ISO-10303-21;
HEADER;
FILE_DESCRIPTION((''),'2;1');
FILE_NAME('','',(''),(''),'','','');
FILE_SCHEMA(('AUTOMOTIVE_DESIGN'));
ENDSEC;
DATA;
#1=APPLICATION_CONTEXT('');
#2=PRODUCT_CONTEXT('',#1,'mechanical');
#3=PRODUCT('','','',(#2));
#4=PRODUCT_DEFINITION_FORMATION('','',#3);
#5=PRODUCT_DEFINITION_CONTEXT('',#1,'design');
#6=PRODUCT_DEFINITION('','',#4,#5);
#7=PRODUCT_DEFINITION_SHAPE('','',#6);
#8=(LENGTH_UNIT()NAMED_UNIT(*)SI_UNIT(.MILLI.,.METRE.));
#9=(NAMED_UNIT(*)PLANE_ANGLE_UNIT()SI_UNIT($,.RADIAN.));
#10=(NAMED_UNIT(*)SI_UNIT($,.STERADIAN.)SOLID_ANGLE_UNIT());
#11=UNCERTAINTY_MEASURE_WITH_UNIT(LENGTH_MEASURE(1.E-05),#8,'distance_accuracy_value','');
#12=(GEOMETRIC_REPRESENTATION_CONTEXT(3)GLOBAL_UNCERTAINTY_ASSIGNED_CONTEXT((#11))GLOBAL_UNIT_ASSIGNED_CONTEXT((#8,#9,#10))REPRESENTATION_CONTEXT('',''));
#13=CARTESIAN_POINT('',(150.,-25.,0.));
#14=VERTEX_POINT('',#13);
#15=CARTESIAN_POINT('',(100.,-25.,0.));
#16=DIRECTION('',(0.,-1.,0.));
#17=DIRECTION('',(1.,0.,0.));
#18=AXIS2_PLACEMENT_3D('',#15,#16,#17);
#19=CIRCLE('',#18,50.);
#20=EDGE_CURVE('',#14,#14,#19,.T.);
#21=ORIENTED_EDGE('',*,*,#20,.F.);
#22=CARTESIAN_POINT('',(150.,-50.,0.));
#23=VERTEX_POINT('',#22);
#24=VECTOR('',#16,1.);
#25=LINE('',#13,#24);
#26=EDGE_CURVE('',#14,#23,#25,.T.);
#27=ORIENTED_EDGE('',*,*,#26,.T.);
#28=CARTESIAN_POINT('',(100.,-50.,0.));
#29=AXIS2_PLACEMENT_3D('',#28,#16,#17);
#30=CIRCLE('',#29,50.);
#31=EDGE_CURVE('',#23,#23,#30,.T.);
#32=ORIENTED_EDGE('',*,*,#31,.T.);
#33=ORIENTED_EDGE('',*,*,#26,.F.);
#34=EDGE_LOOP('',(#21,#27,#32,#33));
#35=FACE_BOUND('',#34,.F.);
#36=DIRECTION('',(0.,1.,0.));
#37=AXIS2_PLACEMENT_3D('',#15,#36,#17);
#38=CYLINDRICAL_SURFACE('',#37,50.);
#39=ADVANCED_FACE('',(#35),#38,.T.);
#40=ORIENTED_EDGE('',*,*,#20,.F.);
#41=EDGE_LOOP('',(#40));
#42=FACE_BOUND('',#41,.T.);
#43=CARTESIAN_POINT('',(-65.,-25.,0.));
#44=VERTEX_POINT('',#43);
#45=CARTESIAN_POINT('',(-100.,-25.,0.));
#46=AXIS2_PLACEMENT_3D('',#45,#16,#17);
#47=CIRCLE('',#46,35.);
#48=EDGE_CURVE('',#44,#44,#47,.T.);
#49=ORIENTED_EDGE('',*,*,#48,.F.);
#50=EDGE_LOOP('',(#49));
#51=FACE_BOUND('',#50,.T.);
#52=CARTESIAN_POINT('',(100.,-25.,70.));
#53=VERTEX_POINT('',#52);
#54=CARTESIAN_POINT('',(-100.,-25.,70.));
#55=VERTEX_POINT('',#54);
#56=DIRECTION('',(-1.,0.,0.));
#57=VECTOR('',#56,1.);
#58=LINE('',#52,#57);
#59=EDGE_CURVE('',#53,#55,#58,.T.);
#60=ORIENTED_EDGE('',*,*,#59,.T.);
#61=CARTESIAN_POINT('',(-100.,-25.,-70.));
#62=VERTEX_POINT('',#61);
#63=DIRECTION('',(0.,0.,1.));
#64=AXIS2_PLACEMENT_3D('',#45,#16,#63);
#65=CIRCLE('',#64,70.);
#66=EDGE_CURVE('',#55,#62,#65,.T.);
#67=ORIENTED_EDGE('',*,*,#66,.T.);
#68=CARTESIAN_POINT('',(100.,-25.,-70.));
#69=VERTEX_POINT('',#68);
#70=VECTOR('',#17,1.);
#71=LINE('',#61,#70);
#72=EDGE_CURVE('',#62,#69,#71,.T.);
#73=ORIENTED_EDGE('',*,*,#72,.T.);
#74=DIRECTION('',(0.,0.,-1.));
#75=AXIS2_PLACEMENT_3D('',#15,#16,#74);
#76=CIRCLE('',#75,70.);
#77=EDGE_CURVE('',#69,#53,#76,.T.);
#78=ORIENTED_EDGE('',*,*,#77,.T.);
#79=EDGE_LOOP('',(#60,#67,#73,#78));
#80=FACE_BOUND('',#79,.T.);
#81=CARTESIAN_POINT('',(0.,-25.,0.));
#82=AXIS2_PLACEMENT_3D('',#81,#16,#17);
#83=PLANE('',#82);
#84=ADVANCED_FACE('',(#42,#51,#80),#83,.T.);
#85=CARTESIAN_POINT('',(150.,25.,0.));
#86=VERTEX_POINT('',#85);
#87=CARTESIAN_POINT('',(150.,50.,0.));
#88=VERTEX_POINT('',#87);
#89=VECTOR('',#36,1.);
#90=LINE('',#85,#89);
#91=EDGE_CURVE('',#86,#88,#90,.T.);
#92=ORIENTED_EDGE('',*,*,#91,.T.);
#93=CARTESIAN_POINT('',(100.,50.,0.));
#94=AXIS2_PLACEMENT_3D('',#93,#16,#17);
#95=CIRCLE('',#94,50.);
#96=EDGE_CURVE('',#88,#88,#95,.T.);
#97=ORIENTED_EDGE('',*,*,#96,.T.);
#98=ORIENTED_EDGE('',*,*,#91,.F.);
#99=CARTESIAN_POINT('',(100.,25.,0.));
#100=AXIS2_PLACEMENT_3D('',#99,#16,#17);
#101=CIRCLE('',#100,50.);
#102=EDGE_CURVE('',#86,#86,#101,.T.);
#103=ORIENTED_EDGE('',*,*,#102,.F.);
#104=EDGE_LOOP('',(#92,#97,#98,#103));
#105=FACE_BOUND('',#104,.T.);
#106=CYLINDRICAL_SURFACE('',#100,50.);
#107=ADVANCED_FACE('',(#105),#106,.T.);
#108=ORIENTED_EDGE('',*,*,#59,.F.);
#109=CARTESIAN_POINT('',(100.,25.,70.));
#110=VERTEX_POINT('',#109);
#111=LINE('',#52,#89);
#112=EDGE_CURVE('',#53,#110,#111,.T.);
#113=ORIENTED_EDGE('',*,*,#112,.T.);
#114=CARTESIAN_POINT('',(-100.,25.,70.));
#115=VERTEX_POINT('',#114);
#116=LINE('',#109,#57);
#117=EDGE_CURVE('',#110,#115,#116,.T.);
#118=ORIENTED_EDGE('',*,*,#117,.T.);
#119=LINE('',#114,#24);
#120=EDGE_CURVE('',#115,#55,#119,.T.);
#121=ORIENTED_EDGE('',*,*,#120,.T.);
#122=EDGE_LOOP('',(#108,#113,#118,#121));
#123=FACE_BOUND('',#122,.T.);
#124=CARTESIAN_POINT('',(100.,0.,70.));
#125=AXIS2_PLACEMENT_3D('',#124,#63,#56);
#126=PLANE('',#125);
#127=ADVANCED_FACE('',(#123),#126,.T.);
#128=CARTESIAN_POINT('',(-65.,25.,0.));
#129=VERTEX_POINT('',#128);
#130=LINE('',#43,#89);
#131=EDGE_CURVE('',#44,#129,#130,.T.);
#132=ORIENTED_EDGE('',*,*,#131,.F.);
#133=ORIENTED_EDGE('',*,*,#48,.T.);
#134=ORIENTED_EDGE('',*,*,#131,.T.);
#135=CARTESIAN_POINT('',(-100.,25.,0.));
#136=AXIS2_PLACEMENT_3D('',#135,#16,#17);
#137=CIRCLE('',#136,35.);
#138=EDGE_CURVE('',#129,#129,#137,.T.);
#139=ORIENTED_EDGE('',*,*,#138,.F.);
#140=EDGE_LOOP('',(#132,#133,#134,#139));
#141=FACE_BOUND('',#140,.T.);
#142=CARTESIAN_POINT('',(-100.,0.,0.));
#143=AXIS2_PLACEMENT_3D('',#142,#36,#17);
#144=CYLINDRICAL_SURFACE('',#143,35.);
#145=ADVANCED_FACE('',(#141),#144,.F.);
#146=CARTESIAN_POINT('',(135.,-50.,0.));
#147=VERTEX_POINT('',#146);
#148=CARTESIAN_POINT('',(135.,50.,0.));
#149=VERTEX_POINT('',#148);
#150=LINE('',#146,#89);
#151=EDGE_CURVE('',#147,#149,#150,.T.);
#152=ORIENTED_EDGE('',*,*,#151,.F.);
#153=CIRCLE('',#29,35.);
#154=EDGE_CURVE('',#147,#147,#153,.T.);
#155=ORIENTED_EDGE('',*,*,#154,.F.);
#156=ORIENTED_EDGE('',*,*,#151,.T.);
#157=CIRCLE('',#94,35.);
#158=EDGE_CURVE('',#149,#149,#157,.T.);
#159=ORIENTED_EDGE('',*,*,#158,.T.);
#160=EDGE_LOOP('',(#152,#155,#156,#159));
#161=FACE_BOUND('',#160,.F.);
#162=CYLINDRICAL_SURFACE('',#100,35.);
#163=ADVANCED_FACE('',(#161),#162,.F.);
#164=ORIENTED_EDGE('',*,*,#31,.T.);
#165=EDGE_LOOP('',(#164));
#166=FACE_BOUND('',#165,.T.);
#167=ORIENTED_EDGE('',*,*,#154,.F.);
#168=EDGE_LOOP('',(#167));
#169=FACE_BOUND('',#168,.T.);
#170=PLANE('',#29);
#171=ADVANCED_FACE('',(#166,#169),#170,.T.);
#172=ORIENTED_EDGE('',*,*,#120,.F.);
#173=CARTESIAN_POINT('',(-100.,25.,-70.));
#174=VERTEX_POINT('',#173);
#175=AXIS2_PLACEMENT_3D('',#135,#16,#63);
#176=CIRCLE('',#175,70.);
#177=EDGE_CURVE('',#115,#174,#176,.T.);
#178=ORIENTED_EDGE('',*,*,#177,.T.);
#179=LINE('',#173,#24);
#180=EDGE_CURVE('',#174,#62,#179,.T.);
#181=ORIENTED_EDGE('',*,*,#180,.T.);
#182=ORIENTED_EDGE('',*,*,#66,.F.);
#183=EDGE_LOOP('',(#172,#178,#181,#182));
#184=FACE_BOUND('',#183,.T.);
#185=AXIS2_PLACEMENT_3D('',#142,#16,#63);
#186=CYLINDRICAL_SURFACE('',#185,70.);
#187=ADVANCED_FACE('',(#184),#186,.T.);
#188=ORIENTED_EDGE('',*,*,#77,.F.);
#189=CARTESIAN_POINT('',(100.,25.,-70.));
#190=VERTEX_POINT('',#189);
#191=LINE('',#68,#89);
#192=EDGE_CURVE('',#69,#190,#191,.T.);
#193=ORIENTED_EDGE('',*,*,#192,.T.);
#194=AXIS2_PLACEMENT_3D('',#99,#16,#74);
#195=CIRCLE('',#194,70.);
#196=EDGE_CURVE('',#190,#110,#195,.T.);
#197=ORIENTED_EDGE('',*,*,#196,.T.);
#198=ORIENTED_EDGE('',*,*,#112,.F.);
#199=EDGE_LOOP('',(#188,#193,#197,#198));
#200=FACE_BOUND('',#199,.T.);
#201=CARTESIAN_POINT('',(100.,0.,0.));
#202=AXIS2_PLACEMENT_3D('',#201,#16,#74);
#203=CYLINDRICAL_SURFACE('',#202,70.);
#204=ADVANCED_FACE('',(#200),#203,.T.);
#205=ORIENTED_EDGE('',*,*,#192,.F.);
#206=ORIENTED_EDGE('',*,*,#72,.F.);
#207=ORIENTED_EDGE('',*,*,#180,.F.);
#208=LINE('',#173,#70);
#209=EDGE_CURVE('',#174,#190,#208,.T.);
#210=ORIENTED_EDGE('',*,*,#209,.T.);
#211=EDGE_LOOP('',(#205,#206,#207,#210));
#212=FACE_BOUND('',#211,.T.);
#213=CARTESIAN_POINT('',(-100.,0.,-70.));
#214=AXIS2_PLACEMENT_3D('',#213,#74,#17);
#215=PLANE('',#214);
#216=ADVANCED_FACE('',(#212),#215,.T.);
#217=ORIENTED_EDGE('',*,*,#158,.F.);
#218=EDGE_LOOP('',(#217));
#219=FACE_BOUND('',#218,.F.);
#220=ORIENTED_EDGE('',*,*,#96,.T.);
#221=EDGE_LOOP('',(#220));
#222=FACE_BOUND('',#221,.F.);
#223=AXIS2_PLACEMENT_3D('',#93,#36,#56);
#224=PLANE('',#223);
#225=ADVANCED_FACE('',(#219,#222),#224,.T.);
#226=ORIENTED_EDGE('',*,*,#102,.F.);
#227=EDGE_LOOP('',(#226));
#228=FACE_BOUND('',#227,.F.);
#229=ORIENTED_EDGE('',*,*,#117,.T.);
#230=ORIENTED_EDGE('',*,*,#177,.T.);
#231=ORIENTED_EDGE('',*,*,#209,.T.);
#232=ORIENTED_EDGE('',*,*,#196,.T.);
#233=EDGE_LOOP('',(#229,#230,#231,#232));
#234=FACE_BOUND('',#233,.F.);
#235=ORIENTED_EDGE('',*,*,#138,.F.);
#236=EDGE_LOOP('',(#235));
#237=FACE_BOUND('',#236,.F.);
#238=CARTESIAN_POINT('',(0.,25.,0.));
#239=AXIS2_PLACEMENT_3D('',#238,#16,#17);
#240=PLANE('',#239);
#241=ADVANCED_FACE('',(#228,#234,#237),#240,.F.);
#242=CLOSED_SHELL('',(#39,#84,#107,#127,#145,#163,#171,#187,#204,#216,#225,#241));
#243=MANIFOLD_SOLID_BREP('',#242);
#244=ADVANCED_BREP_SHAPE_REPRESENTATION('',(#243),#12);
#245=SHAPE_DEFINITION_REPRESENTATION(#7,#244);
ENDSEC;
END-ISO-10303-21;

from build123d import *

# Parameters (mm, degrees)
F0_R     = 35
F1_DEPTH = 25
F2_R     = 50
F2_R_2   = 35
F3_DEPTH = 25


# Not quite as in the source:
# - a pattern or mirror of a feature is missing from the dataset's text; its kind, count and spacing are read off the source's solid


with BuildPart() as f1:
    # F0 (on Front) → F1 (new body, symmetric)
    with BuildSketch(Plane.XZ):
        with BuildLine():
            Line((100, 70), (-100, 70))
            ThreePointArc((-100, 70), (-170, 0), (-100, -70))
            Line((-100, -70), (100, -70))
            ThreePointArc((100, -70), (170, 0), (100, 70))
        make_face()
        with Locations((-100, 0)):
            Circle(F0_R, mode=Mode.SUBTRACT)
        with Locations((100, 0)):
            Circle(F0_R, mode=Mode.SUBTRACT)
    extrude(amount=F1_DEPTH, both=True)

    # F2 (on face) → F3 (join)
    with BuildSketch(Plane.XZ.offset(25)):
        with Locations((100, 0)):
            Circle(F2_R)
        with Locations((100, 0)):
            Circle(F2_R_2, mode=Mode.SUBTRACT)
    f3 = extrude(amount=F3_DEPTH)

    # F3_copies: F3 across plane
    add(f3.mirror(Plane.ZX))


solid = f1.part
